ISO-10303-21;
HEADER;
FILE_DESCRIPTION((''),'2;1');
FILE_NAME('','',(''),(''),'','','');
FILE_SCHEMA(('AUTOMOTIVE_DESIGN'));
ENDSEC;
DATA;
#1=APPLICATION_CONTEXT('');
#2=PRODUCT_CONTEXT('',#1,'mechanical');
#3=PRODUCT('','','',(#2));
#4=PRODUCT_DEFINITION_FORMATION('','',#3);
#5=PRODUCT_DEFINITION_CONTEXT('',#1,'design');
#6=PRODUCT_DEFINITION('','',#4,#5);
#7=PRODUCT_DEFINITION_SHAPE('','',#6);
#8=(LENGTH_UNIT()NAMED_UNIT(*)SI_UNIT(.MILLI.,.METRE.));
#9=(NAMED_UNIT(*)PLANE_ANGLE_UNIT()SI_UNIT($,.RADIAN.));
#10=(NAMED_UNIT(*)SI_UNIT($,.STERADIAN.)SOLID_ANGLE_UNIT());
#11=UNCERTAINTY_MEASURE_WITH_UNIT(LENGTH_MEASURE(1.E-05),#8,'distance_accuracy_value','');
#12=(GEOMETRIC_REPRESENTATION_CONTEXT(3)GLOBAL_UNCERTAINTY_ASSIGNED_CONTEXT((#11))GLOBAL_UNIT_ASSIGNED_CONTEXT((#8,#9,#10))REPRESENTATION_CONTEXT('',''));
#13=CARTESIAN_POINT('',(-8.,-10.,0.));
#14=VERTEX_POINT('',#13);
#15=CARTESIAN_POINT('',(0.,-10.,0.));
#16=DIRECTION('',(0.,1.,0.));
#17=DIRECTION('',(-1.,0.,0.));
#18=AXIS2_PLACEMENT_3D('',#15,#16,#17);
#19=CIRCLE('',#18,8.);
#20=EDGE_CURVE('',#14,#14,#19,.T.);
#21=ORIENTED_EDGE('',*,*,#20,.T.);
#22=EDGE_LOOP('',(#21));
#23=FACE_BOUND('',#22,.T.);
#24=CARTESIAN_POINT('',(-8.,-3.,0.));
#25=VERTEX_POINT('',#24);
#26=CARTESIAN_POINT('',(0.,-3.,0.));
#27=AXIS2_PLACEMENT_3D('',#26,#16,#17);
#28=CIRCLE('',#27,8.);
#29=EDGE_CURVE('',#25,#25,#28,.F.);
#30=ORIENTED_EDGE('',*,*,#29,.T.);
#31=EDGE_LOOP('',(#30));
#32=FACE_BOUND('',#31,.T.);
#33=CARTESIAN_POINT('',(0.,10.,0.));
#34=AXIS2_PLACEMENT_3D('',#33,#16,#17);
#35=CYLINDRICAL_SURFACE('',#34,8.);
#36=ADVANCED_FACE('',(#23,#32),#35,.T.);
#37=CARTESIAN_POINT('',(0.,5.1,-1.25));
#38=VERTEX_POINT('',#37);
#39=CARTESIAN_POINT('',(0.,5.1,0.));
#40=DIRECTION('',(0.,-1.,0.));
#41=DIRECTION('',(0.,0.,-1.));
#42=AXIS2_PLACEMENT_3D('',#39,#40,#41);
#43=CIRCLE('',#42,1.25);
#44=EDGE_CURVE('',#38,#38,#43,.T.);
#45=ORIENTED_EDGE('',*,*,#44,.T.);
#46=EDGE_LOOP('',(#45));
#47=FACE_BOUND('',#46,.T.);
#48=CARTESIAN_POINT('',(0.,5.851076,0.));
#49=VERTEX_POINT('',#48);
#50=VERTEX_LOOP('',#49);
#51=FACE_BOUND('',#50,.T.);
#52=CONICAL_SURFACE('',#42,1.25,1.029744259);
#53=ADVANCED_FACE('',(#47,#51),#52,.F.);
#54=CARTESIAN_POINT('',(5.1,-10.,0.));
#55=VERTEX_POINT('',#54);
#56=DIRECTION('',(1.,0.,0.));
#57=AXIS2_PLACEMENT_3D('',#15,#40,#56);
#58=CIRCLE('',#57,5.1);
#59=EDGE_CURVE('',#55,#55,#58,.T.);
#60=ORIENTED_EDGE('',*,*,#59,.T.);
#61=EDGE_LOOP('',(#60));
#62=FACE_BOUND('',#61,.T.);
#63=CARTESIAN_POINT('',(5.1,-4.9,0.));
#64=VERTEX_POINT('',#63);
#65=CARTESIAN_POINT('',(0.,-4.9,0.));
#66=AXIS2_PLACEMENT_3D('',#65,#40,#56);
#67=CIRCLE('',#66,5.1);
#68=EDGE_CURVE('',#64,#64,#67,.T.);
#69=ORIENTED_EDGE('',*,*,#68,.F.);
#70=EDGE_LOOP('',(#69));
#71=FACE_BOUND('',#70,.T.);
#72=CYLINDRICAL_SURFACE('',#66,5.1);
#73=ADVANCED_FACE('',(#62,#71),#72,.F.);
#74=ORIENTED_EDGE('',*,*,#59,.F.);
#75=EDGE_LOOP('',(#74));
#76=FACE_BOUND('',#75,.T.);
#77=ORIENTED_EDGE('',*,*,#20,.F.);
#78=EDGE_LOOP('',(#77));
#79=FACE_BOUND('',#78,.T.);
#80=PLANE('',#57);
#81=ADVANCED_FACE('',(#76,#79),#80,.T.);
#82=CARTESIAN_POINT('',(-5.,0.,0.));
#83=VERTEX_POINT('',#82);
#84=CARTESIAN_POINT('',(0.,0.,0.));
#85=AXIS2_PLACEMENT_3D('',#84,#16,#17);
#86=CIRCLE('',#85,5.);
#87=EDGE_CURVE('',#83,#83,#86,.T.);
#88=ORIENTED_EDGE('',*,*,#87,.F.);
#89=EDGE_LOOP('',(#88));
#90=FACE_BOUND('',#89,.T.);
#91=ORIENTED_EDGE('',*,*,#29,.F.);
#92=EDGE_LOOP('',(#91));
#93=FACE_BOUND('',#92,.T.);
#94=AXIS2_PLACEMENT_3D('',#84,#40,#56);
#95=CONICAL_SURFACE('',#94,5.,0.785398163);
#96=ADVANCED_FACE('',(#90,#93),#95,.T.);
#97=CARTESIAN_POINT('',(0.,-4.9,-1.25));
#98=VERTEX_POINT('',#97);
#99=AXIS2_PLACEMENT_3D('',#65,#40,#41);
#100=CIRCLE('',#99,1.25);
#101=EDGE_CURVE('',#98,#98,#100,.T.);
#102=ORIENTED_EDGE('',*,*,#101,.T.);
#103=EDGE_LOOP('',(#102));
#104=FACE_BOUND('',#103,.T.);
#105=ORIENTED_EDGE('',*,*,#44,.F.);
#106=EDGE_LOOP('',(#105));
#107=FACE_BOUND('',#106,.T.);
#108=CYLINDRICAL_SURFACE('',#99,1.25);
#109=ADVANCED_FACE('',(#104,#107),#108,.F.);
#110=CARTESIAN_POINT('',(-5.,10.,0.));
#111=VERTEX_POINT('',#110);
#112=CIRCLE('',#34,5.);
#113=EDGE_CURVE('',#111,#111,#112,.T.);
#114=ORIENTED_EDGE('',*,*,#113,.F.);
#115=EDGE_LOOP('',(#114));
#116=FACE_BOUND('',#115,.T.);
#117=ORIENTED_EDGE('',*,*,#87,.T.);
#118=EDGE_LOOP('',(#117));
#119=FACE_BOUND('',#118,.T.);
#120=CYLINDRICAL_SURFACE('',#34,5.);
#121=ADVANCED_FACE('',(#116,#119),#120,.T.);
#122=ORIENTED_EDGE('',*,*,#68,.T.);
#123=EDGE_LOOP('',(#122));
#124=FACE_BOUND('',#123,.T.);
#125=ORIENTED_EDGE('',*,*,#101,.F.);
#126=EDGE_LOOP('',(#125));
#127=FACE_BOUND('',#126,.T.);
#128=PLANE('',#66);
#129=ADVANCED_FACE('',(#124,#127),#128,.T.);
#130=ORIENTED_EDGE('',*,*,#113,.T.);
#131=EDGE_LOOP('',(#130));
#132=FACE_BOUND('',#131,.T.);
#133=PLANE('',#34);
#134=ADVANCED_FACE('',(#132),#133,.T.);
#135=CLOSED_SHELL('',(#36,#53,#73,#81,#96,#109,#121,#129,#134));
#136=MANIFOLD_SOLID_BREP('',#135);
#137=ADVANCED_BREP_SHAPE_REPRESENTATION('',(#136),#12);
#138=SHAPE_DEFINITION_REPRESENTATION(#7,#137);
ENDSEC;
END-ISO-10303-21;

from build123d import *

# Parameters (mm, degrees)
CHAMFER_1_SIZE       = 3
SKETCH_4_R           = 5.1
CUT_EXTRUDE_1_DEPTH  = 5.1
HOLE_WIZARD_M3_D     = 2.5
HOLE_WIZARD_M3_DEPTH = 10
HOLE_WIZARD_M3_TIP   = 0.751075774


with BuildPart() as part:
    # Эскиз1 → Revolve 482 (revolve)
    with BuildSketch(Plane.XY):
        Polygon((0, 10), (-5, 10), (-5, 0), (-8, 0), (-8, -10), (0, -10), align=None)
    revolve(axis=Axis((0, 10, 0), (0, -1, 0)))

    # Фаска1
    chamfer_1_edges = [part.edges().sort_by_distance(p)[0] for p in [
        (8, 0, 0),
    ]]
    chamfer(chamfer_1_edges, length=CHAMFER_1_SIZE - 0.0001)  # a hair under: the kernel refuses the full size

    # Эскиз4 → Вырез-Вытянуть1 (cut)
    with BuildSketch(Plane.XZ.offset(10)):
        Circle(SKETCH_4_R)
    extrude(amount=-CUT_EXTRUDE_1_DEPTH, mode=Mode.SUBTRACT)

    # Крепление магнита M3
    with Locations(Plane(origin=(0, -4.9, 0), x_dir=(-1, 0, 0), z_dir=(0, -1, 0))):
        with Locations((0, 0)):
            Hole(HOLE_WIZARD_M3_D / 2, depth=HOLE_WIZARD_M3_DEPTH)
            with Locations((0, 0, -(HOLE_WIZARD_M3_DEPTH + HOLE_WIZARD_M3_TIP / 2))):  # 118° drill point
                Cone(0, HOLE_WIZARD_M3_D / 2, HOLE_WIZARD_M3_TIP, mode=Mode.SUBTRACT)


solid = part.part
